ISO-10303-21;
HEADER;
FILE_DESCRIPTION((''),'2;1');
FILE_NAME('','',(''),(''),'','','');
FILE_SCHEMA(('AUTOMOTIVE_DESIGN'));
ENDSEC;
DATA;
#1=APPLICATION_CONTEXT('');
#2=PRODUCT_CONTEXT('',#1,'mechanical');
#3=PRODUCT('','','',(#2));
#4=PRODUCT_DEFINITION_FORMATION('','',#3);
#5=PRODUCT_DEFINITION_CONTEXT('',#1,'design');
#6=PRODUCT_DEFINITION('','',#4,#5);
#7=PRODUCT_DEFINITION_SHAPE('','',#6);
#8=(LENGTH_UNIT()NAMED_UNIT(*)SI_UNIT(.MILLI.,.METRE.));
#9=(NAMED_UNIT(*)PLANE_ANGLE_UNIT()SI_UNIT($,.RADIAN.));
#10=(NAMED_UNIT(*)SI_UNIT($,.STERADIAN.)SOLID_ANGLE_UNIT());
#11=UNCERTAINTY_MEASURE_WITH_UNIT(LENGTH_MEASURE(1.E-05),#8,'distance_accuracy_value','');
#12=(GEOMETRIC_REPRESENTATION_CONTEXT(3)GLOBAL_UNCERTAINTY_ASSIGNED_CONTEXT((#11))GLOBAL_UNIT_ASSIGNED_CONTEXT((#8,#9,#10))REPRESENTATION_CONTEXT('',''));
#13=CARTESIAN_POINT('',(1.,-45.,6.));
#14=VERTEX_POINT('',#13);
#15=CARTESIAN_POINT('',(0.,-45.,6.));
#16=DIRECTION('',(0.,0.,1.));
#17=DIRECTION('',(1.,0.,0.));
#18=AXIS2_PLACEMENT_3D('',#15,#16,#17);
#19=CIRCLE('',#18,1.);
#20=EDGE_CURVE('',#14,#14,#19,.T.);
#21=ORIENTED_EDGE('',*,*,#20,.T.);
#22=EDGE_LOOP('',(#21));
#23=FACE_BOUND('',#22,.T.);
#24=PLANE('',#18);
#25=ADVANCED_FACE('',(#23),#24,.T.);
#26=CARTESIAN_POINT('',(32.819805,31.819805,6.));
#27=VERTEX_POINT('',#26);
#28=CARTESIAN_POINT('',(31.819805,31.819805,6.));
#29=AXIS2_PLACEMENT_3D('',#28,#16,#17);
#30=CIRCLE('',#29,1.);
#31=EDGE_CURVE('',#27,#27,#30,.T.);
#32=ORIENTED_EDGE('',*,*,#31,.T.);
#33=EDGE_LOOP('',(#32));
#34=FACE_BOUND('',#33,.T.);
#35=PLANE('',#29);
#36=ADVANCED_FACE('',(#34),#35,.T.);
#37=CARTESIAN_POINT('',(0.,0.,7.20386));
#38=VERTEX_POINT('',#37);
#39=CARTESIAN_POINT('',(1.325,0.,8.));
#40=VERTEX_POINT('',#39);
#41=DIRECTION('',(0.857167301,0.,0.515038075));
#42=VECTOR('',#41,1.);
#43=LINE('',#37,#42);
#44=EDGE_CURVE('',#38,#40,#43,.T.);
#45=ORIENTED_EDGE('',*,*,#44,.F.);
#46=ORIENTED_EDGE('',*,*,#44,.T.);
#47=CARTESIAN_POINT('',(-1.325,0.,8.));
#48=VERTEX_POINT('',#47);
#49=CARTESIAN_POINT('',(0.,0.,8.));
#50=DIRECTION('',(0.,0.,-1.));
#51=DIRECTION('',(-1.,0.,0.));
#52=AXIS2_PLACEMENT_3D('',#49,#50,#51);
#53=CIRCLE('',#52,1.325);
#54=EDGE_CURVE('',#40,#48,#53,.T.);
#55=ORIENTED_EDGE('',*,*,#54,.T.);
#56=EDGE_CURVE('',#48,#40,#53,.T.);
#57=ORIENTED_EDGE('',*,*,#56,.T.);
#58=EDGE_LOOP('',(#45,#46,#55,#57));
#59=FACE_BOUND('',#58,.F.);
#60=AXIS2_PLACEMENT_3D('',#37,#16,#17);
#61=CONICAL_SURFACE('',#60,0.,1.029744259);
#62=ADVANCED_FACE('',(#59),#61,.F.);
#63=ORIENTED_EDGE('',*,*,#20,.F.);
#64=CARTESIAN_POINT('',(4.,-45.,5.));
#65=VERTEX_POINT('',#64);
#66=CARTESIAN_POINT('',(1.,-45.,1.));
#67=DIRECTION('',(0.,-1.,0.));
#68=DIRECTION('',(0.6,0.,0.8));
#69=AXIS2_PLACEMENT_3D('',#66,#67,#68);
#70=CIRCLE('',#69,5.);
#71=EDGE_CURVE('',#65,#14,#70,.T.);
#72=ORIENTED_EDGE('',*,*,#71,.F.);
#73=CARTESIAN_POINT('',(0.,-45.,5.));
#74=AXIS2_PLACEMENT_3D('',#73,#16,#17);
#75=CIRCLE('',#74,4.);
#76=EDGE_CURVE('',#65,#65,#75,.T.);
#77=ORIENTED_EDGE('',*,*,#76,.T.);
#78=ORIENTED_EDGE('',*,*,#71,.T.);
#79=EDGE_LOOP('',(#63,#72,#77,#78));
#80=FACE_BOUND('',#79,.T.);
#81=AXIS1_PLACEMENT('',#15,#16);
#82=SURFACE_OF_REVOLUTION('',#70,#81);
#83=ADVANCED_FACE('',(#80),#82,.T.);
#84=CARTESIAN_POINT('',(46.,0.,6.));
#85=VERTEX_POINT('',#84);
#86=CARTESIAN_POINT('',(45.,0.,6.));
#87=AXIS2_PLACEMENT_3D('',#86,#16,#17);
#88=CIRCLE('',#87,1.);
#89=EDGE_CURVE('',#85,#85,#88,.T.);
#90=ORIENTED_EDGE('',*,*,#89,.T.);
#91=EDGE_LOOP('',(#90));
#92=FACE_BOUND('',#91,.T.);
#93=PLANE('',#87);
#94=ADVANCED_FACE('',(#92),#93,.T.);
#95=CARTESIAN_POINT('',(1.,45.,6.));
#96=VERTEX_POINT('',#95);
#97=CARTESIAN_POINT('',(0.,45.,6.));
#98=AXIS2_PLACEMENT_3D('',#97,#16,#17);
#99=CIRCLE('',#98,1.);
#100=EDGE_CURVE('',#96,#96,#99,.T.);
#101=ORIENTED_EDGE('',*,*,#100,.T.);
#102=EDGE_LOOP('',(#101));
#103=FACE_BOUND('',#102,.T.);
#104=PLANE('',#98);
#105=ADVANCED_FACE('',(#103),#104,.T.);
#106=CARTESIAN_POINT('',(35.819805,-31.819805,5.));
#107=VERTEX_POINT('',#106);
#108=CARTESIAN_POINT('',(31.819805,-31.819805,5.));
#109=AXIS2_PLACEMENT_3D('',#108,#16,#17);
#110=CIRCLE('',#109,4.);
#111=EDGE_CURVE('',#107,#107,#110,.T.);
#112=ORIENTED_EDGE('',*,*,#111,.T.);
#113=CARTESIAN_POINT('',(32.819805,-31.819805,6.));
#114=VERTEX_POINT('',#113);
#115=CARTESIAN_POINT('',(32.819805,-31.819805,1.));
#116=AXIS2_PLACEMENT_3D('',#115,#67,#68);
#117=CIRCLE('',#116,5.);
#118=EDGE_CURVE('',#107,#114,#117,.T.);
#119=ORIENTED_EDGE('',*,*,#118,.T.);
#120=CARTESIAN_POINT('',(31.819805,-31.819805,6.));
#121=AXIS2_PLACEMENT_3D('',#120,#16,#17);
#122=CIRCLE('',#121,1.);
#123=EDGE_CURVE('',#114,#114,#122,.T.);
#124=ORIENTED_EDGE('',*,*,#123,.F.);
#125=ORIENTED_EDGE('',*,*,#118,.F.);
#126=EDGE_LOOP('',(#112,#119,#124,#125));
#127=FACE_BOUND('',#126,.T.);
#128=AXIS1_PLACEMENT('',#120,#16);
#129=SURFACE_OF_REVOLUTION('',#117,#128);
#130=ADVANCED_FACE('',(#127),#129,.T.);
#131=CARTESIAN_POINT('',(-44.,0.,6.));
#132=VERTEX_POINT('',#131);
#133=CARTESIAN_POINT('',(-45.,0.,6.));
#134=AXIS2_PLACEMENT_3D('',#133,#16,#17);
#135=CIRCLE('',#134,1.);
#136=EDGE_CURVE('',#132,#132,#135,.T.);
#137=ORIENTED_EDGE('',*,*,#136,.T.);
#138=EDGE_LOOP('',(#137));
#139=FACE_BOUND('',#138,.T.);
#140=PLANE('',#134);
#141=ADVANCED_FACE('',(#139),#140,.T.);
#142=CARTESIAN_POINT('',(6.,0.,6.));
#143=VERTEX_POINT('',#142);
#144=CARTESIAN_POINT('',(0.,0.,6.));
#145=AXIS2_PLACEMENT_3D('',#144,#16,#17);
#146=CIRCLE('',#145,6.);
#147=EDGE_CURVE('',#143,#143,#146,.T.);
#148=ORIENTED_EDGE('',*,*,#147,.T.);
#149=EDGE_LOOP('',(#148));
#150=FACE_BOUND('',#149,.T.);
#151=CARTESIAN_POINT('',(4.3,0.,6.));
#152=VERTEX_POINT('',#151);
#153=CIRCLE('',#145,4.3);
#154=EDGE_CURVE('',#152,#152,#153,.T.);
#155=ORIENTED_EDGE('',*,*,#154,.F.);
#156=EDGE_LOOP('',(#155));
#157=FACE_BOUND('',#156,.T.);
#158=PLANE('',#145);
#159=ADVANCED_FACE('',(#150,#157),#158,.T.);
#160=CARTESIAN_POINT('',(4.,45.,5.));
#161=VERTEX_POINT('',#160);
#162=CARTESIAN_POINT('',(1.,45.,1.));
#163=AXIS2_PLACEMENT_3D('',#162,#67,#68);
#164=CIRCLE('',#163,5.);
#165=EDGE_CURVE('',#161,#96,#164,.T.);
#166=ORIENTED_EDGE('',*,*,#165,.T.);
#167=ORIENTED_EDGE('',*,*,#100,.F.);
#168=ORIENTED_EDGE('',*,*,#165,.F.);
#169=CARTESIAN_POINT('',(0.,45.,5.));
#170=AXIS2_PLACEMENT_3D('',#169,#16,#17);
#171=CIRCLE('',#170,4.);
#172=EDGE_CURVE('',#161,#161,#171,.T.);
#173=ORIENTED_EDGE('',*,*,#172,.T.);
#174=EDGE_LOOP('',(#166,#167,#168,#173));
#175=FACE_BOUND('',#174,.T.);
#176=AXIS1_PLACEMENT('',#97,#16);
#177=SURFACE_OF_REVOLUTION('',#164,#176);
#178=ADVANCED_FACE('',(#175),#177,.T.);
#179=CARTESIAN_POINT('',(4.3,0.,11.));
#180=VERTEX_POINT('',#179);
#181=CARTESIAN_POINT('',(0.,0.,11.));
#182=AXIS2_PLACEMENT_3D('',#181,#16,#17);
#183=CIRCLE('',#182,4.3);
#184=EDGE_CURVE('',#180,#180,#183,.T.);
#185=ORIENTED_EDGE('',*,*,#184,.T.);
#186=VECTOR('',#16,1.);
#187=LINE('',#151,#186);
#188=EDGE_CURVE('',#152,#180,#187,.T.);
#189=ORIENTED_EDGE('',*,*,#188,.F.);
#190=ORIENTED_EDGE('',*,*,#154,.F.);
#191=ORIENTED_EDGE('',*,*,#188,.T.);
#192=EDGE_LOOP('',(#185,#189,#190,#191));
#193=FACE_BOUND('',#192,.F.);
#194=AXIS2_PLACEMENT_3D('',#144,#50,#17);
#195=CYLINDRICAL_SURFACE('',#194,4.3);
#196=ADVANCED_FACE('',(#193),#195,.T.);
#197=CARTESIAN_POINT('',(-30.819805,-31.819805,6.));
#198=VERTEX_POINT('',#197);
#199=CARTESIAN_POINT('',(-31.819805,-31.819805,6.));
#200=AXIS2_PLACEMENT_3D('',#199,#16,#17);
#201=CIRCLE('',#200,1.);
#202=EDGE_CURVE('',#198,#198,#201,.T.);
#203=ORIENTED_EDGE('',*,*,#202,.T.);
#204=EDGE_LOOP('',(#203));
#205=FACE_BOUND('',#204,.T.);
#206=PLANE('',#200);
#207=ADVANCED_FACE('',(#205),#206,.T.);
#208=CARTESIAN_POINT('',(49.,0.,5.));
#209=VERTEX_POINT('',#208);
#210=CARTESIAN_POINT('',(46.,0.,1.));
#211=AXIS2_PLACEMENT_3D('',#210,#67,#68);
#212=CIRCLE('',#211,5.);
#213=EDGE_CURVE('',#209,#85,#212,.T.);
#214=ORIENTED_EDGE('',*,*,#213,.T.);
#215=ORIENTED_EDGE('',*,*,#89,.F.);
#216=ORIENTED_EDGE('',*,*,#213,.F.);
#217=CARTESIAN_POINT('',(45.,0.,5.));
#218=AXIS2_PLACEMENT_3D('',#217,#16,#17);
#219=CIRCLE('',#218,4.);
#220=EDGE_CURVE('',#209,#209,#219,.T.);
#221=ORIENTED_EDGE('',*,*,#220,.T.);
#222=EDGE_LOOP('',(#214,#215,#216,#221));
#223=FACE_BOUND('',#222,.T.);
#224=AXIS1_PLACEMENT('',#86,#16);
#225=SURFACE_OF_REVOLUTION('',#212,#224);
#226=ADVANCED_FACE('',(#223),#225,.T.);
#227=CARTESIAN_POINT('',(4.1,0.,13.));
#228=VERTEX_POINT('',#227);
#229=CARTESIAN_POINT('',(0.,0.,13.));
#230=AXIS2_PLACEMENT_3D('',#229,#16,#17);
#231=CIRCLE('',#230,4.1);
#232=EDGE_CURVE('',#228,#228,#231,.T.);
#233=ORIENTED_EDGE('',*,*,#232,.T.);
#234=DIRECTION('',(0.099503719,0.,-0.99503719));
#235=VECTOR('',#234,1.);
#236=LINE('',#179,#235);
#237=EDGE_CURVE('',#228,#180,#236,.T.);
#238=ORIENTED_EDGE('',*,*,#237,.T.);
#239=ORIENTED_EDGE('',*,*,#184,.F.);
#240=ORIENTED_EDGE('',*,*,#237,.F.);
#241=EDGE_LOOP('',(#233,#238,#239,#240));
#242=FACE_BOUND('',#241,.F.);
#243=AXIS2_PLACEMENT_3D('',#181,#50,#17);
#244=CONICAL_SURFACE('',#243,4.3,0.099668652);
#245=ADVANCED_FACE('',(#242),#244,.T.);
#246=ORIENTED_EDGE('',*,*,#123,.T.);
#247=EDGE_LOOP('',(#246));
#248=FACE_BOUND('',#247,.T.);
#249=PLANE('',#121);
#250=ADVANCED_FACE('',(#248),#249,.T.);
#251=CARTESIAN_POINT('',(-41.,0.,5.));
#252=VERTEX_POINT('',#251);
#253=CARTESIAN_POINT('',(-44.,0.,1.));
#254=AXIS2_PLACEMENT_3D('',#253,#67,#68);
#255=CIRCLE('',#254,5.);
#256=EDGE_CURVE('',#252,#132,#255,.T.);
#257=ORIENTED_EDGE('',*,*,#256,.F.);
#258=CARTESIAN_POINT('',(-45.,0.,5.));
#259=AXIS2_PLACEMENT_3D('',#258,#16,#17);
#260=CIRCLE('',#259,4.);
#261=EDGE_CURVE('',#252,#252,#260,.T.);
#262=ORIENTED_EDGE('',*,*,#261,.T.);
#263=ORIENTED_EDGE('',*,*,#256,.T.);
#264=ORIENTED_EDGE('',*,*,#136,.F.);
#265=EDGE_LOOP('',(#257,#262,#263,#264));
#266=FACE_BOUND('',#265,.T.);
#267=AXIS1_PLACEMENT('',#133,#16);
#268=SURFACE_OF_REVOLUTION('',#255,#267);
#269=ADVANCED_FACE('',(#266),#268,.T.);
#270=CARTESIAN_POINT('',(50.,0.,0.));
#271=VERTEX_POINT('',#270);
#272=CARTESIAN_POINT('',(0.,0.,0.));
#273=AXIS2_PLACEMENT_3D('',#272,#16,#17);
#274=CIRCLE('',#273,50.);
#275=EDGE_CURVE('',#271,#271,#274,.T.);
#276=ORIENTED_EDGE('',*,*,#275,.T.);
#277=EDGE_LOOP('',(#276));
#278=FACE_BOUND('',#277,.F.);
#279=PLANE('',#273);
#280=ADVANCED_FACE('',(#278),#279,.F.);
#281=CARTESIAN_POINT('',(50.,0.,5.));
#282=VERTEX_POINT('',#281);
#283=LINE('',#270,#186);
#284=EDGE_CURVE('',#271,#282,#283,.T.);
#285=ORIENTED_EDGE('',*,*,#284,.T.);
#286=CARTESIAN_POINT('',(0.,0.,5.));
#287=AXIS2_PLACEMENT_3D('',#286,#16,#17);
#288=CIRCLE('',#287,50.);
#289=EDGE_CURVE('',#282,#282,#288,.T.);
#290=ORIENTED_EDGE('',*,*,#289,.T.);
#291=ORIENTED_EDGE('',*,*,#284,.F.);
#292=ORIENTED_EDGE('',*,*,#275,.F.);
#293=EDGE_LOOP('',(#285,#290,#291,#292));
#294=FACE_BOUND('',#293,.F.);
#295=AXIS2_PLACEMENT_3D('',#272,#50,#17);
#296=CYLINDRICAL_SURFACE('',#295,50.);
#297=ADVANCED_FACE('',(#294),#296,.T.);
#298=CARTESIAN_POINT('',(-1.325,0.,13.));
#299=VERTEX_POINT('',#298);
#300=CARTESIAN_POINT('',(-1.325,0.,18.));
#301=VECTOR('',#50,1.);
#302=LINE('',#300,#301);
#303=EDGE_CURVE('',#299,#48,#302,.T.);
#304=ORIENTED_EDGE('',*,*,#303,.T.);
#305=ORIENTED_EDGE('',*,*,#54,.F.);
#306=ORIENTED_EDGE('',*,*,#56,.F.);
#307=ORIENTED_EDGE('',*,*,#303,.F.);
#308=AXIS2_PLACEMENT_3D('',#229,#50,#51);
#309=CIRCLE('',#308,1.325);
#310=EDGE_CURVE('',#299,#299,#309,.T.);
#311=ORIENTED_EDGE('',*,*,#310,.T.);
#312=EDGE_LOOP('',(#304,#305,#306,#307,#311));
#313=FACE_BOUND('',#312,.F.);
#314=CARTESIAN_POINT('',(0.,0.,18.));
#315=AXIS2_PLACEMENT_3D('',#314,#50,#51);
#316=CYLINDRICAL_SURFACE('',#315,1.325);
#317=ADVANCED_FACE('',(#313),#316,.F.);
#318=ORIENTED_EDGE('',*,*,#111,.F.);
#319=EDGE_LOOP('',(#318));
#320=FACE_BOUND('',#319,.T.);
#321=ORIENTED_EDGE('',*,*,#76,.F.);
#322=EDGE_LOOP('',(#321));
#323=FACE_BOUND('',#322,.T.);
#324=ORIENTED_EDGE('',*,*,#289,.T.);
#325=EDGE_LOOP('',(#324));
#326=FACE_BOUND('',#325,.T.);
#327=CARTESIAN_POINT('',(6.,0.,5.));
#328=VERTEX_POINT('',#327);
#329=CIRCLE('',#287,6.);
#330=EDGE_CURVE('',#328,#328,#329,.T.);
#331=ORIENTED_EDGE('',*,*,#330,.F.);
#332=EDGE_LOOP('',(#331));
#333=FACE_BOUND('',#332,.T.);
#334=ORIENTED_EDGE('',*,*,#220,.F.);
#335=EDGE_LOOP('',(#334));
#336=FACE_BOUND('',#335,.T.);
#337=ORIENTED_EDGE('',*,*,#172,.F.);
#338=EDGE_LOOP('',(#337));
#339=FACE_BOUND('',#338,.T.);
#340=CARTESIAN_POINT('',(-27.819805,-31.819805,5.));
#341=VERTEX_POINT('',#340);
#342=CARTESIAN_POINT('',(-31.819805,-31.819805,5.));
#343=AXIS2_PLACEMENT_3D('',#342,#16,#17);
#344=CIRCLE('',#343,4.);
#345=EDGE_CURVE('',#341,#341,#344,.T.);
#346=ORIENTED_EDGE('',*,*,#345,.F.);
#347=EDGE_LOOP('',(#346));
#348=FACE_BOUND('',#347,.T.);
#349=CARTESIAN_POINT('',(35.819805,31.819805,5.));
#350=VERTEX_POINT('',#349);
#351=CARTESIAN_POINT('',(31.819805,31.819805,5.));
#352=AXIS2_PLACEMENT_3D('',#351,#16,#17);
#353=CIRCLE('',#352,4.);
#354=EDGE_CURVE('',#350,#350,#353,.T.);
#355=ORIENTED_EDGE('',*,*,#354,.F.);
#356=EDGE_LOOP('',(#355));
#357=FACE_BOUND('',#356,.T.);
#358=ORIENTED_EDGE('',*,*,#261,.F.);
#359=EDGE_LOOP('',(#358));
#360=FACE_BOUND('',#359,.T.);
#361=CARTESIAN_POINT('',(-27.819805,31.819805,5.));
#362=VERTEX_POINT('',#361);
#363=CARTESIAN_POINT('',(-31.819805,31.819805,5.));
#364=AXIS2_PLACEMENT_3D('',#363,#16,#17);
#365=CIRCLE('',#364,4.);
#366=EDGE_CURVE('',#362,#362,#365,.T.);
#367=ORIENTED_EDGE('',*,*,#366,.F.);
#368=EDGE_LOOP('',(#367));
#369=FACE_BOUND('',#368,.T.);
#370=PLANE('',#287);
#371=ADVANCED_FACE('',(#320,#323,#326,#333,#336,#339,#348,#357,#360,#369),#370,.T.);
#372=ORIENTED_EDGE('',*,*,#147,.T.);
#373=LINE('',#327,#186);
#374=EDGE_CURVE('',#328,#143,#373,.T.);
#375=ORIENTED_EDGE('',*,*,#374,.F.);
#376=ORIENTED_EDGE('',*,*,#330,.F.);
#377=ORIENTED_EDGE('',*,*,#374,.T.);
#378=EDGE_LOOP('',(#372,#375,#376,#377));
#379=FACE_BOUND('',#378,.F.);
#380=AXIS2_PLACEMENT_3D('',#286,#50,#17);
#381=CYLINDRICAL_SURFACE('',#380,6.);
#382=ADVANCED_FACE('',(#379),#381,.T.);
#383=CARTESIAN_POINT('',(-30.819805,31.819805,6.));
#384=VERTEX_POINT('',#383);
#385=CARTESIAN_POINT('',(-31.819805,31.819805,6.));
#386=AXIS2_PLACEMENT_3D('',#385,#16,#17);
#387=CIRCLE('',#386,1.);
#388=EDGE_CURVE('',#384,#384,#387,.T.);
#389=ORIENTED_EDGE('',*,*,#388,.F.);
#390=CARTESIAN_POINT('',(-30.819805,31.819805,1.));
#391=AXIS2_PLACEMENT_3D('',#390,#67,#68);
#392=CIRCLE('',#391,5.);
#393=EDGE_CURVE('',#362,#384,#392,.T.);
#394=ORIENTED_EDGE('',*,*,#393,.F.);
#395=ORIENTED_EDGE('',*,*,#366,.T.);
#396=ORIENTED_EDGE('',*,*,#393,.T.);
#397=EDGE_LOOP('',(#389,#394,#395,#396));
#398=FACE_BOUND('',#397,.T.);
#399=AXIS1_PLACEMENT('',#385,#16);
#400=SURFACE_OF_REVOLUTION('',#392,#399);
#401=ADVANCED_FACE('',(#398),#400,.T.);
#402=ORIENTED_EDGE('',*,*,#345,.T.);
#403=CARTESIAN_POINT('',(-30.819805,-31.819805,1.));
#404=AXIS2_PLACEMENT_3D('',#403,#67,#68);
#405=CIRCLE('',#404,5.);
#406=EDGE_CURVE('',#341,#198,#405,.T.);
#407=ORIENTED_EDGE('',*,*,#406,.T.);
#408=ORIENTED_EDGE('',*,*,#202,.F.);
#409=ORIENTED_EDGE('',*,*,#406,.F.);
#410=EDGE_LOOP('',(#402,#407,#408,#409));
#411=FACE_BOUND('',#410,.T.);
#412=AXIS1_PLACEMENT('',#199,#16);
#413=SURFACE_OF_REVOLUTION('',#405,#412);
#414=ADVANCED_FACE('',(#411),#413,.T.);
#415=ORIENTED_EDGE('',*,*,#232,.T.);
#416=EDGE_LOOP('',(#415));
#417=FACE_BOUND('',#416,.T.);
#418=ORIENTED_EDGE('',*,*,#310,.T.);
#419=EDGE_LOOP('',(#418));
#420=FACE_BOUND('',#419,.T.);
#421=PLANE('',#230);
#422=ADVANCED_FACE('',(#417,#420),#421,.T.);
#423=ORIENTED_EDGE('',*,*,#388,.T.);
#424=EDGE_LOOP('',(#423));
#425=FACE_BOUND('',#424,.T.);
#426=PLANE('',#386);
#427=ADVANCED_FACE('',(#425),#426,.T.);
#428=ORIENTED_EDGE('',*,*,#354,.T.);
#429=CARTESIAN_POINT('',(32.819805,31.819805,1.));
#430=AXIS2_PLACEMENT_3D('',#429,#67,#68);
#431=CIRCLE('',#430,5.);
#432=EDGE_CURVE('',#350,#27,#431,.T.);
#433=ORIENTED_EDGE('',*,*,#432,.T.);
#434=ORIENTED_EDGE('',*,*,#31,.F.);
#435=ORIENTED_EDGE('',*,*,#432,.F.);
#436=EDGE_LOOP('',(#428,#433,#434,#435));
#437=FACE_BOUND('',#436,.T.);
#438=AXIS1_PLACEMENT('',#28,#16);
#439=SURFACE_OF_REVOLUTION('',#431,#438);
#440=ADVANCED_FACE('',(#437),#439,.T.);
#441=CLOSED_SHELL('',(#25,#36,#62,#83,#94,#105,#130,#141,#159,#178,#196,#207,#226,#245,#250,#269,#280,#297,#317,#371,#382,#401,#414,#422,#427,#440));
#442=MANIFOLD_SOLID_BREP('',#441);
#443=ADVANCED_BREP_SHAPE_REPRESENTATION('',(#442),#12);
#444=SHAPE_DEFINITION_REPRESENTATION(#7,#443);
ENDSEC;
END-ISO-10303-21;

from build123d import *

# Parameters (mm, degrees)
F0_R      = 50
F1_DEPTH  = 5
F2_R      = 6
F3_DEPTH  = 1
F4_R      = 4.3
F5_DEPTH  = 7
F7_D      = 2.65
F7_DEPTH  = 5
F7_TIP    = 0.7961403202
F8_SIZE2  = 2
F8_SIZE   = 0.2
F9_R      = 4
F10_DEPTH = 1


# Not quite as in the source:
# - a fillet or chamfer that OpenCascade refuses, or shapes differently, is made with other operations: its cross-section is extruded or revolved along the edge and cut away or added


with BuildPart() as f1:
    # F0 (on Top) → F1 (new body)
    with BuildSketch(Plane.XY):
        Circle(F0_R)
    extrude(amount=F1_DEPTH)

    # F2 (on face) → F3 (join)
    with BuildSketch(Plane.XY.offset(5)):
        Circle(F2_R)
    extrude(amount=F3_DEPTH)

    # F4 (on face) → F5 (join)
    with BuildSketch(Plane.XY.offset(6)):
        Circle(F4_R)
    extrude(amount=F5_DEPTH)

    # F7
    with Locations(Plane.XY.offset(13)):
        with Locations((0, 0)):
            Hole(F7_D / 2, depth=F7_DEPTH)
            with Locations((0, 0, -(F7_DEPTH + F7_TIP / 2))):  # 118° drill point
                Cone(0, F7_D / 2, F7_TIP, mode=Mode.SUBTRACT)

    # F8
    f8_edges = [f1.edges().sort_by_distance(p)[0] for p in [
        (-4.3, 0, 13),
    ]]
    f8_side = f1.faces().sort_by_distance((-4.178378, 0, 13))[0]
    chamfer(f8_edges, length=F8_SIZE, length2=F8_SIZE2, reference=f8_side)

    # F9 (on face) → F10 (join)
    with BuildSketch(Plane.XY.offset(5)):
        with Locations((0, 45)):
            Circle(F9_R)
        with Locations((-31.8198051534, 31.8198051534)):
            Circle(F9_R)
        with Locations((-45, 0)):
            Circle(F9_R)
        with Locations((-31.8198051534, -31.8198051534)):
            Circle(F9_R)
        with Locations((0, -45)):
            Circle(F9_R)
        with Locations((31.8198051534, -31.8198051534)):
            Circle(F9_R)
        with Locations((45, 0)):
            Circle(F9_R)
        with Locations((31.8198051534, 31.8198051534)):
            Circle(F9_R)
    extrude(amount=F10_DEPTH)

    # F11: fillet of radius 5 on 8 edges, made by hand

    # F11_s1 → F11_t2 (revolve, cut)
    with BuildSketch(Plane.XZ.offset(45)):
        with BuildLine():
            ThreePointArc((4, 5), (2.5811388301, 5.7434164903), (1, 6))
            Line((1, 6), (4, 6))
            Line((4, 6), (4, 5))
        make_face()
    revolve(axis=Axis((0, -45, 6), (0, 0, 1)), mode=Mode.SUBTRACT)

    # F11_s3 → F11_t4 (revolve, cut)
    with BuildSketch(Plane.XZ.offset(31.8198051534)):
        with BuildLine():
            ThreePointArc((35.8198051534, 5), (34.4009439835, 5.7434164903), (32.8198051534, 6))
            Line((32.8198051534, 6), (35.8198051534, 6))
            Line((35.8198051534, 6), (35.8198051534, 5))
        make_face()
    revolve(axis=Axis((31.8198051534, -31.8198051534, 6), (0, 0, 1)), mode=Mode.SUBTRACT)

    # F11_s5 → F11_t6 (revolve, cut)
    with BuildSketch(Plane.XZ):
        with BuildLine():
            ThreePointArc((49, 5), (47.5811388301, 5.7434164903), (46, 6))
            Line((46, 6), (49, 6))
            Line((49, 6), (49, 5))
        make_face()
    revolve(axis=Axis((45, 0, 6), (0, 0, 1)), mode=Mode.SUBTRACT)

    # F11_s7 → F11_t8 (revolve, cut)
    with BuildSketch(Plane.XZ.offset(-31.8198051534)):
        with BuildLine():
            ThreePointArc((35.8198051534, 5), (34.4009439835, 5.7434164903), (32.8198051534, 6))
            Line((32.8198051534, 6), (35.8198051534, 6))
            Line((35.8198051534, 6), (35.8198051534, 5))
        make_face()
    revolve(axis=Axis((31.8198051534, 31.8198051534, 6), (0, 0, 1)), mode=Mode.SUBTRACT)

    # F11_s9 → F11_t10 (revolve, cut)
    with BuildSketch(Plane.XZ.offset(-45)):
        with BuildLine():
            ThreePointArc((4, 5), (2.5811388301, 5.7434164903), (1, 6))
            Line((1, 6), (4, 6))
            Line((4, 6), (4, 5))
        make_face()
    revolve(axis=Axis((0, 45, 6), (0, 0, 1)), mode=Mode.SUBTRACT)

    # F11_s11 → F11_t12 (revolve, cut)
    with BuildSketch(Plane.XZ.offset(-31.8198051534)):
        with BuildLine():
            ThreePointArc((-27.8198051534, 5), (-29.2386663233, 5.7434164903), (-30.8198051534, 6))
            Line((-30.8198051534, 6), (-27.8198051534, 6))
            Line((-27.8198051534, 6), (-27.8198051534, 5))
        make_face()
    revolve(axis=Axis((-31.8198051534, 31.8198051534, 6), (0, 0, 1)), mode=Mode.SUBTRACT)

    # F11_s13 → F11_t14 (revolve, cut)
    with BuildSketch(Plane.XZ):
        with BuildLine():
            ThreePointArc((-41, 5), (-42.4188611699, 5.7434164903), (-44, 6))
            Line((-44, 6), (-41, 6))
            Line((-41, 6), (-41, 5))
        make_face()
    revolve(axis=Axis((-45, 0, 6), (0, 0, 1)), mode=Mode.SUBTRACT)

    # F11_s15 → F11_t16 (revolve, cut)
    with BuildSketch(Plane.XZ.offset(31.8198051534)):
        with BuildLine():
            ThreePointArc((-27.8198051534, 5), (-29.2386663233, 5.7434164903), (-30.8198051534, 6))
            Line((-30.8198051534, 6), (-27.8198051534, 6))
            Line((-27.8198051534, 6), (-27.8198051534, 5))
        make_face()
    revolve(axis=Axis((-31.8198051534, -31.8198051534, 6), (0, 0, 1)), mode=Mode.SUBTRACT)


solid = f1.part
